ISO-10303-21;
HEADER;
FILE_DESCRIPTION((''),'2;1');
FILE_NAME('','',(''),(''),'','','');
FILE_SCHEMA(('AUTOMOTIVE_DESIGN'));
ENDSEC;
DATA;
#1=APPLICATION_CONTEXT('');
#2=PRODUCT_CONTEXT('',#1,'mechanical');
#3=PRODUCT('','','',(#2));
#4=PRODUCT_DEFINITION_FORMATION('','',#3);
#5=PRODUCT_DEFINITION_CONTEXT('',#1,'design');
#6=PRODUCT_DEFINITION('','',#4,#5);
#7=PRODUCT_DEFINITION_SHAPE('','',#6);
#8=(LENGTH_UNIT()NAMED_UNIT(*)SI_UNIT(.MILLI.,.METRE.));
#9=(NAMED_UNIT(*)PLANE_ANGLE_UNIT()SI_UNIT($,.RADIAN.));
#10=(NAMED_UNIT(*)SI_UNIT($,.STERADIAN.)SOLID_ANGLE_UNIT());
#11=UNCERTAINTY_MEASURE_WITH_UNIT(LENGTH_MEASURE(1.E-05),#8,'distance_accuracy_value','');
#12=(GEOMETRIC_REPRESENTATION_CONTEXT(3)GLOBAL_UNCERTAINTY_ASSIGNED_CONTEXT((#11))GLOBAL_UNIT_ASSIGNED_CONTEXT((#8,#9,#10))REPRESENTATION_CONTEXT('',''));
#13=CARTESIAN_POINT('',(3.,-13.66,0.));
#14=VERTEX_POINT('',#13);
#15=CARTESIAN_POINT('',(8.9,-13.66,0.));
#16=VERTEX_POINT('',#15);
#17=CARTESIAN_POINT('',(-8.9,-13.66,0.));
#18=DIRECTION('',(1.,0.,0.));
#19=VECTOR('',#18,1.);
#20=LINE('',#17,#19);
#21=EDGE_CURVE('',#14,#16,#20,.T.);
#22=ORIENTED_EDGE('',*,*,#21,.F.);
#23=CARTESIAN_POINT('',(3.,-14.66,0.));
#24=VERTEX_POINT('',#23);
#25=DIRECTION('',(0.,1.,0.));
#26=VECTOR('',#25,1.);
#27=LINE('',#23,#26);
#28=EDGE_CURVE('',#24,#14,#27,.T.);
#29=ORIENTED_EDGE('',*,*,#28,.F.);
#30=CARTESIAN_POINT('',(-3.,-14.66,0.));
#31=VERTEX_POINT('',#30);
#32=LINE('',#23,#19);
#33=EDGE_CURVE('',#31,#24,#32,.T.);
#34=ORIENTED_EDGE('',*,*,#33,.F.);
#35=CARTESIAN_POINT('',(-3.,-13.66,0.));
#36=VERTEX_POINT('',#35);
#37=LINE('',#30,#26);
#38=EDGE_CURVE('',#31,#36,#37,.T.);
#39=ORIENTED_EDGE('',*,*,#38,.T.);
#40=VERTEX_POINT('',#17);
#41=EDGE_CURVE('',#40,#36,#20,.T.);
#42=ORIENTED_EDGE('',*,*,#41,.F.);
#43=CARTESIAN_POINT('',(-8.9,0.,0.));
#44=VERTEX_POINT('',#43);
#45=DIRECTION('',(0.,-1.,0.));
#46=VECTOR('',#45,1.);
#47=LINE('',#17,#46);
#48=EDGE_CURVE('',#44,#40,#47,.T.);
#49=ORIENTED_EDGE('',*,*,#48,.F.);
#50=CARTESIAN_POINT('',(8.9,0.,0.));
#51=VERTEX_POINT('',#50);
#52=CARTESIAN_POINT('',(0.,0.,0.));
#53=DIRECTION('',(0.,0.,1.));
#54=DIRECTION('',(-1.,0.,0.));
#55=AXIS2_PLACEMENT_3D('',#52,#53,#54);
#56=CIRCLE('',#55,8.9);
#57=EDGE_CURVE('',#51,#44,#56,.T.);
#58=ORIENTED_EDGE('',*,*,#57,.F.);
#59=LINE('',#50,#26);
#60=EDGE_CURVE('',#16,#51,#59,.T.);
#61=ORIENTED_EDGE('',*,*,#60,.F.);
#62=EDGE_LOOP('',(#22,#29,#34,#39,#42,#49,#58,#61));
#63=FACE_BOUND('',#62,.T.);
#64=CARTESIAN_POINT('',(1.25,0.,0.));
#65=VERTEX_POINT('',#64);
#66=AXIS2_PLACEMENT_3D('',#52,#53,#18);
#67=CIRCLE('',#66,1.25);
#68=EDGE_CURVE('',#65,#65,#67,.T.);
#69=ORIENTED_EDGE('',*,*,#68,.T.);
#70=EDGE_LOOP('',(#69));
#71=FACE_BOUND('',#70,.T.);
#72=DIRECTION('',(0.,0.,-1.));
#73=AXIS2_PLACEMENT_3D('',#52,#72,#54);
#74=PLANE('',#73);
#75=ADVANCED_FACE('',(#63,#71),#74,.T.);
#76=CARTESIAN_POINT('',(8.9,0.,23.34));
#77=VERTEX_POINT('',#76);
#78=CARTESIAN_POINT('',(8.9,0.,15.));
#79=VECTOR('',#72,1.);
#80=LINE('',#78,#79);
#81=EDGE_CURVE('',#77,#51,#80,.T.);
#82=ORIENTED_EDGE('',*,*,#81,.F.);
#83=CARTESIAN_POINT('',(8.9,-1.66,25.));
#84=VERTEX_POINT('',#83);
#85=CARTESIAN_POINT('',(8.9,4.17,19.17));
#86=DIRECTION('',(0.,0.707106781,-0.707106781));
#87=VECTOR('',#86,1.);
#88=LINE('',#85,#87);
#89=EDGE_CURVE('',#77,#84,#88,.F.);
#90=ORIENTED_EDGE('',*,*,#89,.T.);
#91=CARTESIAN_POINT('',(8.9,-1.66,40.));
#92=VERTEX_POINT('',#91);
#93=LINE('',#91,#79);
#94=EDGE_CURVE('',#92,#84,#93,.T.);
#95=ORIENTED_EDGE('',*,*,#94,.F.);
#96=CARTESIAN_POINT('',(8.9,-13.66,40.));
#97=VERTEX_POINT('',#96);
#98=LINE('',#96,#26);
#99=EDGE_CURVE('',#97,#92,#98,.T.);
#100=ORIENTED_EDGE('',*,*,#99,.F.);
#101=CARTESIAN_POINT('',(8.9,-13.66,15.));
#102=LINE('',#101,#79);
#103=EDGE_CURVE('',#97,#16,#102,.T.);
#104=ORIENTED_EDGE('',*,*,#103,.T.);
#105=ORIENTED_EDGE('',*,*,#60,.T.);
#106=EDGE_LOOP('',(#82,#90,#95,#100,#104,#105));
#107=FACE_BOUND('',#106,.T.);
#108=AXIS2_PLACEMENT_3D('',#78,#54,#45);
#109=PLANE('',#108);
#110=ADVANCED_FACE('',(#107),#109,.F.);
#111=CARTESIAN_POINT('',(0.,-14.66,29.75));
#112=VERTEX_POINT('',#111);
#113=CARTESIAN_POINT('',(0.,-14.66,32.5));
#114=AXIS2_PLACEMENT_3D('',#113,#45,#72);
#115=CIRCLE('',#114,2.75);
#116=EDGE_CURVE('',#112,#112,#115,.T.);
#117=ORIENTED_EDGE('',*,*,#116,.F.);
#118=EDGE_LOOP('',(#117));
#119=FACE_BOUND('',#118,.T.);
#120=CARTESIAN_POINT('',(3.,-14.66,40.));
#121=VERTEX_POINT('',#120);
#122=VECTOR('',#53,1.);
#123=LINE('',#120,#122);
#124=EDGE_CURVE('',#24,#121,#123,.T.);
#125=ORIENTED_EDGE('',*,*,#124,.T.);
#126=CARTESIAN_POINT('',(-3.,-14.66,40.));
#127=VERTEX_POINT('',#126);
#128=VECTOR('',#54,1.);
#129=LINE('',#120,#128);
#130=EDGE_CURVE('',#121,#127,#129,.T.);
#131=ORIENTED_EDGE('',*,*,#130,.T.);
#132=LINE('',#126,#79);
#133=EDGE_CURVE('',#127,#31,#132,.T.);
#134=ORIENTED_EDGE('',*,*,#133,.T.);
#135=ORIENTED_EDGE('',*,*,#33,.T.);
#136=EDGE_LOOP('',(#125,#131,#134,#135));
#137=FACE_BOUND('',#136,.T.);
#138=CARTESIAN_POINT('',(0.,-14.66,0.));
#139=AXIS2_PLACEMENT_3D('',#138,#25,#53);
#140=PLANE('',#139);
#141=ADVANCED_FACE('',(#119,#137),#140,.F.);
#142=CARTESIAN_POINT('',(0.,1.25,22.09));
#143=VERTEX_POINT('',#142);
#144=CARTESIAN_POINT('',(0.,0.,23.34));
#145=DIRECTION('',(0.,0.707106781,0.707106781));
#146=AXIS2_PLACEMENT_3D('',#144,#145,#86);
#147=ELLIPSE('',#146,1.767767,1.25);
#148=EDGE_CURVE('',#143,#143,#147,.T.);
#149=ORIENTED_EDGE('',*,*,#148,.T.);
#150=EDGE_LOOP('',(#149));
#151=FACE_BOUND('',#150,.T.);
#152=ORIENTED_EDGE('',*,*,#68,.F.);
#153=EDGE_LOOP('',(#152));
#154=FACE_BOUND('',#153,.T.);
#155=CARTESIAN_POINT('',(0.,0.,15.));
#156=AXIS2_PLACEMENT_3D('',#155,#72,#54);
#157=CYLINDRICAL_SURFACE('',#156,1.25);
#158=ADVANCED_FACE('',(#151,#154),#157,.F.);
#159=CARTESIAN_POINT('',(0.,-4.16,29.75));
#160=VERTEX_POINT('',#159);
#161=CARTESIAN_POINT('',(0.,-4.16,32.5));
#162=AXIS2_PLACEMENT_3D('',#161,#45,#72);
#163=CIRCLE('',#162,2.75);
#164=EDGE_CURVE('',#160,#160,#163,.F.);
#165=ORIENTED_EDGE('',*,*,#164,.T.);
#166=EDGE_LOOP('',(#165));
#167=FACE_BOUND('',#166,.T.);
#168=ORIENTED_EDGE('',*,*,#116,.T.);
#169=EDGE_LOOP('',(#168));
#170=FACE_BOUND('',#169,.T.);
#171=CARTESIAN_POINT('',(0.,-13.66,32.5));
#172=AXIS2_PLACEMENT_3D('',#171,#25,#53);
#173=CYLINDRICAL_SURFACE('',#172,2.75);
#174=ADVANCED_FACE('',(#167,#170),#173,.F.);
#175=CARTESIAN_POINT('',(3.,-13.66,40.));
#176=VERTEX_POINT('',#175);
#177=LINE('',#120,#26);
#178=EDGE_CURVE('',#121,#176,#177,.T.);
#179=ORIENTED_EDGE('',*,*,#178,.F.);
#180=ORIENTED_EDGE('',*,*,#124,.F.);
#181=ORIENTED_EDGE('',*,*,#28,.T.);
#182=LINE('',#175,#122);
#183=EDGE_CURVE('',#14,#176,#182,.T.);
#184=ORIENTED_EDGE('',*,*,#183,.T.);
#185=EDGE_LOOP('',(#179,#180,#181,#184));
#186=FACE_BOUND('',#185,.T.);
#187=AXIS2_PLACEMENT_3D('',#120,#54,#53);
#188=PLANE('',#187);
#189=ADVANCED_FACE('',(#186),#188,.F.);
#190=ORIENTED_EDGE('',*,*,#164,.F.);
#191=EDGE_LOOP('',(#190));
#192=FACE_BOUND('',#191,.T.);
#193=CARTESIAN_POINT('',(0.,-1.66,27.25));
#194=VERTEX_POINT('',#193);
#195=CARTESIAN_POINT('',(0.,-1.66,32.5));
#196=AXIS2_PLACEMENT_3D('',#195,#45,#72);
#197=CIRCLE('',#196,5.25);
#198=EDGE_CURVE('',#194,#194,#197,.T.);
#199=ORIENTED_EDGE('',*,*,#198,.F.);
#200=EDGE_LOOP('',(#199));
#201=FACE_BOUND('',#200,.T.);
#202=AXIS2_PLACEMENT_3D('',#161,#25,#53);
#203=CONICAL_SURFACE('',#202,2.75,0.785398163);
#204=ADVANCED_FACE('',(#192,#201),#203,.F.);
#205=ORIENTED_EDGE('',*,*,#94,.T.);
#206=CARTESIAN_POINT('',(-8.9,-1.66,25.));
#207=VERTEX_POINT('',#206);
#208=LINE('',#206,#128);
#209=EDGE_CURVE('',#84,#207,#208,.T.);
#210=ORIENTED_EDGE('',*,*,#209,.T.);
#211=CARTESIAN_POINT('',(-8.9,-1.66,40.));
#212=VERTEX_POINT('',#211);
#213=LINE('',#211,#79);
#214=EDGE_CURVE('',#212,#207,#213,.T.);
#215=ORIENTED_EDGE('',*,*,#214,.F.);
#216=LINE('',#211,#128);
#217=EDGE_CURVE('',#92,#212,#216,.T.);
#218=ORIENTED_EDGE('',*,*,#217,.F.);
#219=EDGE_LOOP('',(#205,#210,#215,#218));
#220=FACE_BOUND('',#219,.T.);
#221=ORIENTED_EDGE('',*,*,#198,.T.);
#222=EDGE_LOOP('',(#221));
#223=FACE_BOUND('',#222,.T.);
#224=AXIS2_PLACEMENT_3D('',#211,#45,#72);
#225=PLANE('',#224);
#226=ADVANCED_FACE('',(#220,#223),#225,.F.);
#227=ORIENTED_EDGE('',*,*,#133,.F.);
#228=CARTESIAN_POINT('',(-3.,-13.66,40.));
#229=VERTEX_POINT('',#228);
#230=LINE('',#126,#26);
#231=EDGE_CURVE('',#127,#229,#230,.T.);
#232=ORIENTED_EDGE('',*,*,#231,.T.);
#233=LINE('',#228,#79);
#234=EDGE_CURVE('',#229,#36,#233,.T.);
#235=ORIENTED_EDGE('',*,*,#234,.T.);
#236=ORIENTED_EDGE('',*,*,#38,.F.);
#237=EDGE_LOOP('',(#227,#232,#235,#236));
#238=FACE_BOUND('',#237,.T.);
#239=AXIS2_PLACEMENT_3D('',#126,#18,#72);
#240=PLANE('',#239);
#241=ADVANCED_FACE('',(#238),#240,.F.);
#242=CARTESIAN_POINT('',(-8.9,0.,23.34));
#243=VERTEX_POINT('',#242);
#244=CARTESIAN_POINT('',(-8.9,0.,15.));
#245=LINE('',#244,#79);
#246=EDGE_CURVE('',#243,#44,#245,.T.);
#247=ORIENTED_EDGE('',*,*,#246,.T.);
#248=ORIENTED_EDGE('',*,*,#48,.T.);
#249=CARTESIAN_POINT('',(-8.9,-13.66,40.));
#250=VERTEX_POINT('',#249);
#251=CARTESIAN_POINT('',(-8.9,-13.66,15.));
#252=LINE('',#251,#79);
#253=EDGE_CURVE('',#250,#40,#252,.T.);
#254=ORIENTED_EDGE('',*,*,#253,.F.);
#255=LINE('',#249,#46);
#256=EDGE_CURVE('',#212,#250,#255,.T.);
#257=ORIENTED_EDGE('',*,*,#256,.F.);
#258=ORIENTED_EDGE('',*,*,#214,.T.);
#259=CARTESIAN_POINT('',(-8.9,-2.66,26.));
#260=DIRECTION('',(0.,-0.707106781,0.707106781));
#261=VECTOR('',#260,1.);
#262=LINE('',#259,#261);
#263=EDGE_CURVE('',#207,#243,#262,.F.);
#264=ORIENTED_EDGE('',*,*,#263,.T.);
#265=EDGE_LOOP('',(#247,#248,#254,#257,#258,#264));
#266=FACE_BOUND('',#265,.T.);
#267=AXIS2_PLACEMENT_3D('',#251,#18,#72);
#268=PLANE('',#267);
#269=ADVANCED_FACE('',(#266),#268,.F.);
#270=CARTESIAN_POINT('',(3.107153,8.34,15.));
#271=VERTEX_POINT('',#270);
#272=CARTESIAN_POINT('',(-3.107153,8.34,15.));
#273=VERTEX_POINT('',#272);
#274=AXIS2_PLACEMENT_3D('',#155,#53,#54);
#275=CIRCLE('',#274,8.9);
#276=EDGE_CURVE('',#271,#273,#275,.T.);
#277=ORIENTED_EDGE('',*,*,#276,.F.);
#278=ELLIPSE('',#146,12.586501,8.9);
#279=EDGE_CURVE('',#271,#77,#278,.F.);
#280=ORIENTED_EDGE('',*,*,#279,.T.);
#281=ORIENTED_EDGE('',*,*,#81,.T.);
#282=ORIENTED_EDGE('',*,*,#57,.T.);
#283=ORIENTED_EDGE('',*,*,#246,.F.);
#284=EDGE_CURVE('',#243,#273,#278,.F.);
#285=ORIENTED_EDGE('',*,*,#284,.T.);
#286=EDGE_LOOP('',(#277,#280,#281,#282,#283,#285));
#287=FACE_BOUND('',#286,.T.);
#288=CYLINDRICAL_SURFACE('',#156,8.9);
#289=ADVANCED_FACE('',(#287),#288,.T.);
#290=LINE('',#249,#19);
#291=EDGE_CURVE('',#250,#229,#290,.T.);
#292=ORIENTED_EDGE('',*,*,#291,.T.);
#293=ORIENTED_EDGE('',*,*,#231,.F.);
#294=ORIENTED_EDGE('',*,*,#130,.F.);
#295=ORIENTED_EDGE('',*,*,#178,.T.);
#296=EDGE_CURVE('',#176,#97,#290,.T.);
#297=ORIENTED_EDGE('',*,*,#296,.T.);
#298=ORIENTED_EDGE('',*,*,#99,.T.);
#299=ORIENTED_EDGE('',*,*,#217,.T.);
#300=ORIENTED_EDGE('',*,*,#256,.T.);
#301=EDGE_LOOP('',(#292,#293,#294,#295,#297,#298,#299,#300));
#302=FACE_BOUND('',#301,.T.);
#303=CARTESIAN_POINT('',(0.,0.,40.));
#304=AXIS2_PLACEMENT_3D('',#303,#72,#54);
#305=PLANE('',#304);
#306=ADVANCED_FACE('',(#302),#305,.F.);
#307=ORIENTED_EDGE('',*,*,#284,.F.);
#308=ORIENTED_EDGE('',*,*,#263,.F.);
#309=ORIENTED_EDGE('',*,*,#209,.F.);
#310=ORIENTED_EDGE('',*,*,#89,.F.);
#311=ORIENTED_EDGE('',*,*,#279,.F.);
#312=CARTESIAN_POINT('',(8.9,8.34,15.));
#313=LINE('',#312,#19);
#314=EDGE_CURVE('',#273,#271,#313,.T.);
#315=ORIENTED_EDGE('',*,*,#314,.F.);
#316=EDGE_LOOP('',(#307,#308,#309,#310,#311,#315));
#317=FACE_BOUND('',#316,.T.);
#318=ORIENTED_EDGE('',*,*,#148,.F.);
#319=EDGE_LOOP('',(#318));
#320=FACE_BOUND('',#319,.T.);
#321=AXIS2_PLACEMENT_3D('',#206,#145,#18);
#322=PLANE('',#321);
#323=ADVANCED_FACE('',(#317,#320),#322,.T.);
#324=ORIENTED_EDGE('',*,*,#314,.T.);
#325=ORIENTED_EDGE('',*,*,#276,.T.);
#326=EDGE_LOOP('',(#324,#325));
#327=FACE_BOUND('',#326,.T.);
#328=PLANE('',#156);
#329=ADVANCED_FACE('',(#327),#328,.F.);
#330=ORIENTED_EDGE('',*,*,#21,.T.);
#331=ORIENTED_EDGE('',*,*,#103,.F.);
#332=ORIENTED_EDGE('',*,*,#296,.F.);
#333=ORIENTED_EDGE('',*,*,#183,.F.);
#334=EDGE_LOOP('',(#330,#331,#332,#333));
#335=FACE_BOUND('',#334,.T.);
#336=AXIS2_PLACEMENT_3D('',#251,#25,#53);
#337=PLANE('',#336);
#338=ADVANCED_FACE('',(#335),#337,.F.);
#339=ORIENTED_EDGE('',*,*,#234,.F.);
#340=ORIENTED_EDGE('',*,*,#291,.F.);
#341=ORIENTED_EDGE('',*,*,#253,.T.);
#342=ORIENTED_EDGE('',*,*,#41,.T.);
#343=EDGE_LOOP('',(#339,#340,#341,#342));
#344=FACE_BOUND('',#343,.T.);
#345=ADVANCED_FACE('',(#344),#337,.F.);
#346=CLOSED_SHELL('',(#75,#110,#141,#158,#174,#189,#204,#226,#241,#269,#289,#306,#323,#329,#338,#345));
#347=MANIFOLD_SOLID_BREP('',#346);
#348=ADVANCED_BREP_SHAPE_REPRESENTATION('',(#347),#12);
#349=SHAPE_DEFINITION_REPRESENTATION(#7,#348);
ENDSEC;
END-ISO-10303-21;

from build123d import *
from build123d.topology import SkipClean

# Parameters (mm, degrees)
SKETCH1_R           = 1.25
BOSS_EXTRUDE1_DEPTH = 15
SKETCH2_W           = 17.8
SKETCH2_H           = 12
BOSS_EXTRUDE2_DEPTH = 25
CHAMFER1_START      = 15
CHAMFER1_OUTLINE_R  = 1.25
CHAMFER1_DEPTH      = 10
CHAMFER1_START_2    = -10
CHAMFER1_2_DEPTH    = 20
SKETCH3_R           = 2.75
CUT_EXTRUDE1_DEPTH  = 43.699063222
CHAMFER2_SIZE       = 2.5
SKETCH4_W           = 6
SKETCH4_H           = 40
SKETCH4_R           = 2.75
BOSS_EXTRUDE3_DEPTH = 1


with BuildPart() as part:
    # Sketch1 → Boss-Extrude1 (new body)
    with BuildSketch(Plane.XY):
        with BuildLine():
            Line((-8.9, -13.66), (8.9, -13.66))
            Line((8.9, -13.66), (8.9, 0))
            ThreePointArc((8.9, 0), (0, 8.9), (-8.9, 0))
            Line((-8.9, 0), (-8.9, -13.66))
        make_face()
        Circle(SKETCH1_R, mode=Mode.SUBTRACT)
    extrude(amount=BOSS_EXTRUDE1_DEPTH)

    # Sketch2 → Boss-Extrude2 (add)
    with BuildSketch(Plane.XY.offset(15)):
        with Locations((0, -7.66)):
            Rectangle(SKETCH2_W, SKETCH2_H)
    extrude(amount=BOSS_EXTRUDE2_DEPTH)

    # Chamfer1: read off the stored shape, not the designer's step
    # Chamfer1 outline → Chamfer1 (add)
    with BuildSketch(Plane.XY.offset(CHAMFER1_START)):
        with BuildLine():
            Line((-8.9, 0), (-8.9, -1.66))
            Line((-8.9, -1.66), (8.9, -1.66))
            Line((8.9, -1.66), (8.9, 0))
            ThreePointArc((8.9, 0), (0, 8.9), (-8.9, 0))
        make_face()
        Circle(CHAMFER1_OUTLINE_R, mode=Mode.SUBTRACT)
    extrude(amount=CHAMFER1_DEPTH)

    # Chamfer1 2 outline → Chamfer1 2 (cut)
    with BuildSketch(Plane.YZ.offset(CHAMFER1_START_2)):
        Polygon((-1.66, 25), (8.34, 15), (10, 15), (10, 25), align=None)
    extrude(amount=CHAMFER1_2_DEPTH, mode=Mode.SUBTRACT)

    # Sketch3 → Cut-Extrude1 (cut, through all)
    with BuildSketch(Plane(origin=(0, -1.66, 0), x_dir=(1, 0, 0), z_dir=(0, 1, 0))):
        with Locations(Location((0, -32.5, 0), (0, 0, 270))):
            Circle(SKETCH3_R)
    extrude(amount=-CUT_EXTRUDE1_DEPTH, mode=Mode.SUBTRACT)

    # Chamfer2
    chamfer2_edges = [part.edges().sort_by_distance(p)[0] for p in [
        (0, -1.66, 29.75),
    ]]
    chamfer(chamfer2_edges, length=CHAMFER2_SIZE)

    # Sketch4 → Boss-Extrude3 (add)
    with SkipClean():  # the faces are left unmerged after this step: merging them gives an invalid solid
        with BuildSketch(Plane.XZ.offset(13.66)):
            with Locations((0, 20)):
                Rectangle(SKETCH4_W, SKETCH4_H)
            with Locations(Location((0, 32.5, 0), (0, 0, 270))):
                Circle(SKETCH4_R, mode=Mode.SUBTRACT)
        extrude(amount=BOSS_EXTRUDE3_DEPTH)


solid = part.part
